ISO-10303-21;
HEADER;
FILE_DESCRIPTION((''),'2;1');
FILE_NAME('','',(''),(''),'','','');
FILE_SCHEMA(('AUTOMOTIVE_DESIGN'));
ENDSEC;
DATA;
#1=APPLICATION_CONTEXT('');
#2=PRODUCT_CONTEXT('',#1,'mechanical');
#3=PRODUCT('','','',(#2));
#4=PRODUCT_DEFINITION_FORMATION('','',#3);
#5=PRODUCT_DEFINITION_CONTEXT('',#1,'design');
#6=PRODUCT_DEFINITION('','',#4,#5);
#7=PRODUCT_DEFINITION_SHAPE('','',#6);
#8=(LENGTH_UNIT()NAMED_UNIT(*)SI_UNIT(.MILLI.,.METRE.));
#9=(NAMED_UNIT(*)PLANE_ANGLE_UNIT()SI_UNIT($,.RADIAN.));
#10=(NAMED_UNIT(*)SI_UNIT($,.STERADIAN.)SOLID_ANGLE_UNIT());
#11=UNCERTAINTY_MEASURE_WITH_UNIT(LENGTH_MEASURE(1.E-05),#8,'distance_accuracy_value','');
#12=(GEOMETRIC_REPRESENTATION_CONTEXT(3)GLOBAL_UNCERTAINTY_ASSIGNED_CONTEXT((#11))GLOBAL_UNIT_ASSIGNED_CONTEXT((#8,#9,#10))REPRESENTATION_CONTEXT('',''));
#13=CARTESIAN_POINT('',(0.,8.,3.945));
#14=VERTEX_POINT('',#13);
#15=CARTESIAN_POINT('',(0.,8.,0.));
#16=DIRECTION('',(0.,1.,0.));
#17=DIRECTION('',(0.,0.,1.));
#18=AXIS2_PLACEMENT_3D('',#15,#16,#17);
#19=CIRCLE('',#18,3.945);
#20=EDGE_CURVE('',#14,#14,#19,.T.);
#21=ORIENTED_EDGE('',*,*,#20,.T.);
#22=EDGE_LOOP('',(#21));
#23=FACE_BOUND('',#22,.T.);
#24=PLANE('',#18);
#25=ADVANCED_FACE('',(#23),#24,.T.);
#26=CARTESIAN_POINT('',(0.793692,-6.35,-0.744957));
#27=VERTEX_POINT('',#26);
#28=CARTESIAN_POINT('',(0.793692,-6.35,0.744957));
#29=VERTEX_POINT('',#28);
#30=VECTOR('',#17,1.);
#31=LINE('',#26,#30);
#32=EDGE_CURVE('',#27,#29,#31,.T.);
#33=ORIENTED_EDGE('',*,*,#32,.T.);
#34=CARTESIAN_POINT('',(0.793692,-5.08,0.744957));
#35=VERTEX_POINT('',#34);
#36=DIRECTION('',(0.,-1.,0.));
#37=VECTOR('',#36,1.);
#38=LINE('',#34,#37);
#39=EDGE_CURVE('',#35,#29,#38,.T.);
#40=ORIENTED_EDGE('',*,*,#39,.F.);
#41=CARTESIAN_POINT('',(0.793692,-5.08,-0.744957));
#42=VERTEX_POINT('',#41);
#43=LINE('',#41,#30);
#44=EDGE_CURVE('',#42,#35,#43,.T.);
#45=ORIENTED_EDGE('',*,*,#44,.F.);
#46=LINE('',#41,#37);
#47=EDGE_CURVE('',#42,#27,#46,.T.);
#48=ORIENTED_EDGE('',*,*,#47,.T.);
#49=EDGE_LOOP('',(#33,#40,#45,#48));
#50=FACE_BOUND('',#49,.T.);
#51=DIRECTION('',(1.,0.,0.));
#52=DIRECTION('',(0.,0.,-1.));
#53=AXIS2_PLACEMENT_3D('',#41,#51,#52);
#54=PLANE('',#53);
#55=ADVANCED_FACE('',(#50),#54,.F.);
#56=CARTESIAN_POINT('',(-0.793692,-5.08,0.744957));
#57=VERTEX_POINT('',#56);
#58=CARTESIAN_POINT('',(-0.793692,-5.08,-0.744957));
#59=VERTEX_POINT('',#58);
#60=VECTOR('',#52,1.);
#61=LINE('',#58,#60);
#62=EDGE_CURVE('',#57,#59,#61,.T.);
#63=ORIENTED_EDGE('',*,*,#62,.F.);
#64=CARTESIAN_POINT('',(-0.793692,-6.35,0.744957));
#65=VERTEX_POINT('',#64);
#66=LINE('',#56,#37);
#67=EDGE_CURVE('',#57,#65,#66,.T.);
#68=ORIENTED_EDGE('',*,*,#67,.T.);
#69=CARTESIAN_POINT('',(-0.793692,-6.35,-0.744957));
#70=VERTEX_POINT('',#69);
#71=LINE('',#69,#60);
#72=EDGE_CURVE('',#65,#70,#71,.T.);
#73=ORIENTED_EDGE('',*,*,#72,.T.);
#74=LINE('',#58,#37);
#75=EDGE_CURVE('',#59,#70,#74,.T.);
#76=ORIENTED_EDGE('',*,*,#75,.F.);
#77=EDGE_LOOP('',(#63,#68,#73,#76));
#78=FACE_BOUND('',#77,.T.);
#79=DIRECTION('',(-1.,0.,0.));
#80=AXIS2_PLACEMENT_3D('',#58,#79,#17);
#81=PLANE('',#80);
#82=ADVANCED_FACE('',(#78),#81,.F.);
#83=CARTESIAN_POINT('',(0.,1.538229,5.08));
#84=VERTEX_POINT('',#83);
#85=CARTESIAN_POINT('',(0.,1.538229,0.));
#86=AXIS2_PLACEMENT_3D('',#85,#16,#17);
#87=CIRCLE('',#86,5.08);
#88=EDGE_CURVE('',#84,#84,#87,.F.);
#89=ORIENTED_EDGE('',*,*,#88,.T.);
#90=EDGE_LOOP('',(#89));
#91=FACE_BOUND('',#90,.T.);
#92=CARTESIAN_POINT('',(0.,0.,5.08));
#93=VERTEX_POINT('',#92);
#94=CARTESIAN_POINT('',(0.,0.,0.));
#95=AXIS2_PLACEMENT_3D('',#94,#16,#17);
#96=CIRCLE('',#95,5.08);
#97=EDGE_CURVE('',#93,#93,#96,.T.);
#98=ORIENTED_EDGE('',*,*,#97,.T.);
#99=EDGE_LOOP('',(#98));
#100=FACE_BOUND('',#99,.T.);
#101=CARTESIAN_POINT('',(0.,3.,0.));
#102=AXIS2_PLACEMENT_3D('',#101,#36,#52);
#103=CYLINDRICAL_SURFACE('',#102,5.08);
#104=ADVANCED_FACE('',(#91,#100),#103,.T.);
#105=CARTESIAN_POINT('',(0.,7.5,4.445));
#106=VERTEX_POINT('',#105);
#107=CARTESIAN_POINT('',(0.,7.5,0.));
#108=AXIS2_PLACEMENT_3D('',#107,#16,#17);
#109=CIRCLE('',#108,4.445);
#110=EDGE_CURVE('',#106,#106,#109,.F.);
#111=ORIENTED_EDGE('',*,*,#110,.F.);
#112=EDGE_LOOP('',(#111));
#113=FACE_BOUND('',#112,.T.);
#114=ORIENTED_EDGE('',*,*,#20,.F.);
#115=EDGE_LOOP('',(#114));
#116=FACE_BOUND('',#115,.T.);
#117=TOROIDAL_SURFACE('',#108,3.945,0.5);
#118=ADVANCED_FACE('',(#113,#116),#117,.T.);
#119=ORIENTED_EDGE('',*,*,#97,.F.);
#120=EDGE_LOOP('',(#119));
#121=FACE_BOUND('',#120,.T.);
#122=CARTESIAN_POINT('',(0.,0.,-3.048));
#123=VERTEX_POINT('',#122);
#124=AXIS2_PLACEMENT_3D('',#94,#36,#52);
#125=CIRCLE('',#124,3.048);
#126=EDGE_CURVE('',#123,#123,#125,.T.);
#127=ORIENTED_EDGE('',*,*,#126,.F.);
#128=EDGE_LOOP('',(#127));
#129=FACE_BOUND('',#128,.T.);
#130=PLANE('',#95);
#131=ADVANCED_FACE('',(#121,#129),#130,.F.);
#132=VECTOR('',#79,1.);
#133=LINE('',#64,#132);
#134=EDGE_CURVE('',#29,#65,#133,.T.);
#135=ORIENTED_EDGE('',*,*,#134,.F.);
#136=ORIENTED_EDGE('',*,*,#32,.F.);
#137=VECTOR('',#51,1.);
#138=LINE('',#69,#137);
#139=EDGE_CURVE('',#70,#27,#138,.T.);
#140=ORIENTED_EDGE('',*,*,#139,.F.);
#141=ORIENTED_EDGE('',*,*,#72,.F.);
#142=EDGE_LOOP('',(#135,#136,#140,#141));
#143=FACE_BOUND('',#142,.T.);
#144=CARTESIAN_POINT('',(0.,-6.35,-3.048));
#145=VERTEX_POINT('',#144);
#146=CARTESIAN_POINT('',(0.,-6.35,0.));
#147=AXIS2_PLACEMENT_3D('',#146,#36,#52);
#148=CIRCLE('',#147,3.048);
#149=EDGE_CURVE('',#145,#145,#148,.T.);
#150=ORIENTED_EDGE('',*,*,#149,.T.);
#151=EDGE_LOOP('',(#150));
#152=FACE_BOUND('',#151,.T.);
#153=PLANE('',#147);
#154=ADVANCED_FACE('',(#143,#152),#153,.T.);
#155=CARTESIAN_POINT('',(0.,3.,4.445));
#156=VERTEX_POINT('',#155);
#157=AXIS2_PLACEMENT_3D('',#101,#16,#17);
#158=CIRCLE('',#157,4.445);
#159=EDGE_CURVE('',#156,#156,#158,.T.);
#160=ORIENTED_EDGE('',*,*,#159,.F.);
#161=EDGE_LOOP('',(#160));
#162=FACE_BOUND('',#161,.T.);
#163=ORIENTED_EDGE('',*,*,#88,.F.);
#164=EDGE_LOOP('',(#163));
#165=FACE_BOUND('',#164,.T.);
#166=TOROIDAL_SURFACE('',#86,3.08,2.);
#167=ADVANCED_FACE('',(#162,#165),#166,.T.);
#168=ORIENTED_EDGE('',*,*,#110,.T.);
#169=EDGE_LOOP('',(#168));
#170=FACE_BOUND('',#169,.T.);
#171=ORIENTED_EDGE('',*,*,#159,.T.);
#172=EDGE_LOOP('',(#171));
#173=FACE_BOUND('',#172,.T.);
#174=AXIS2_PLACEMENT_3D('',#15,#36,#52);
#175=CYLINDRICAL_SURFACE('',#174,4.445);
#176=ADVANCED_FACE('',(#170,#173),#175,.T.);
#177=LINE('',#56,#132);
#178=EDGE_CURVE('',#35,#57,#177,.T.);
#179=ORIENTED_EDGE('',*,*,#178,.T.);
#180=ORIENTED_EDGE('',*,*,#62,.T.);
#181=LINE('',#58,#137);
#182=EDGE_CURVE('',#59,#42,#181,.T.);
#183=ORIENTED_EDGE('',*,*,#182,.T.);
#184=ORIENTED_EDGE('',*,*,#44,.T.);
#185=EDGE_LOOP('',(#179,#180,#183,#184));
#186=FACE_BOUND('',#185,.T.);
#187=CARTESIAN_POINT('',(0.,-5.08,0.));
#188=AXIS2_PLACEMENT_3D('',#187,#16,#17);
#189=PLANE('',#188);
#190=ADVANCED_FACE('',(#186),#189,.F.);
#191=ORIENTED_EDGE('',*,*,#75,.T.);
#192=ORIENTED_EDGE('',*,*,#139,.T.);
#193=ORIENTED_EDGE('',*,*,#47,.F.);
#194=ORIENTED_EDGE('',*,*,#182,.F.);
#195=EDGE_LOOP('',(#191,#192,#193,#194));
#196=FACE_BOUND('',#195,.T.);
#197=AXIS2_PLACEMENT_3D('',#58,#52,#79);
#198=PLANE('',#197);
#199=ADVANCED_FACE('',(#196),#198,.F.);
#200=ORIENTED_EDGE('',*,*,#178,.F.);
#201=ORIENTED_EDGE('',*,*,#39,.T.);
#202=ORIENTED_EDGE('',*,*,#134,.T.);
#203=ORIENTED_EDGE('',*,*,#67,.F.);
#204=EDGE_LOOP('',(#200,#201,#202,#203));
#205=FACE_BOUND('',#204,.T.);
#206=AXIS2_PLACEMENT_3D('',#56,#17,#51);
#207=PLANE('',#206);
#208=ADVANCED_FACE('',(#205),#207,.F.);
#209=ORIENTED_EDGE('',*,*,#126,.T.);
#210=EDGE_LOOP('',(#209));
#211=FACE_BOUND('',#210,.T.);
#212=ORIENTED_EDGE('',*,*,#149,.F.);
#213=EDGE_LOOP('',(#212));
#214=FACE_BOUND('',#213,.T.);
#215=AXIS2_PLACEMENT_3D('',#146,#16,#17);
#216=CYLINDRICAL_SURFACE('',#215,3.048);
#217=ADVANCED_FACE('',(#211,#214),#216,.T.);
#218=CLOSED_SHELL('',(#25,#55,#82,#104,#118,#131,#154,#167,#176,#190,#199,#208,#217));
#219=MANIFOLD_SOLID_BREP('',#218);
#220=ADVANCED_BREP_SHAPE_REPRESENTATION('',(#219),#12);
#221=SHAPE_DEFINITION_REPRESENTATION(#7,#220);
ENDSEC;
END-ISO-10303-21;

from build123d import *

# Parameters (mm, degrees)
SKETCH1_R           = 5.08
BOSS_EXTRUDE1_DEPTH = 3
SKETCH2_R           = 4.445
BOSS_EXTRUDE2_DEPTH = 5
FILLET2_R           = 2
FILLET3_R           = 0.5
SKETCH3_R           = 3.048
BOSS_EXTRUDE3_DEPTH = 6.35
SKETCH4_W           = 1.587384834
SKETCH4_H           = 1.489913834
CUT_EXTRUDE1_DEPTH  = 1.27


with BuildPart() as part:
    # Sketch1 → Boss-Extrude1 (new body)
    with BuildSketch(Plane(origin=(0, 0, 0), x_dir=(1, 0, 0), z_dir=(0, 1, 0))):
        with Locations(Location((0, 0, 0), (0, 0, 270))):
            Circle(SKETCH1_R)
    extrude(amount=BOSS_EXTRUDE1_DEPTH)

    # Sketch2 → Boss-Extrude2 (add)
    with BuildSketch(Plane(origin=(0, 3, 0), x_dir=(1, 0, 0), z_dir=(0, 1, 0))):
        with Locations(Location((0, 0, 0), (0, 0, 270))):
            Circle(SKETCH2_R)
    extrude(amount=BOSS_EXTRUDE2_DEPTH)

    # Fillet2
    # the kernel refuses this fillet: 2 mm, written as the material it takes off along each edge
    with BuildSketch(Plane(origin=(0, 3, 0), x_dir=(0, 0, 1), z_dir=(-1, 0, 0))) as fillet2_piece_1:
        with BuildLine():
            CenterArc((3.08, -1.461771186), FILLET2_R, 0, 46.960687898)
            Line((4.445, 0), (4.4723, 0.029235424))
            ThreePointArc((4.4723, 0.029235424), (4.7625, 0.04), (5.08, 0.04))
            Line((5.08, 0.04), (5.12, 0))
            Line((5.12, 0), (5.12, -1.461771186))
            Line((5.12, -1.461771186), (5.08, -1.461771186))
        make_face()
    revolve(axis=Axis((0, 3, 0), (0, 1, 0)), mode=Mode.SUBTRACT)

    # Fillet3
    fillet3_edges = [part.edges().sort_by_distance(p)[0] for p in [
        (0, 8, -4.445),
    ]]
    fillet(fillet3_edges, radius=FILLET3_R)

    # Sketch3 → Boss-Extrude3 (add)
    with BuildSketch(Plane.XZ):
        with Locations(Location((0, 0, 0), (0, 0, 270))):
            Circle(SKETCH3_R)
    extrude(amount=BOSS_EXTRUDE3_DEPTH)

    # Sketch4 → Cut-Extrude1 (cut)
    with BuildSketch(Plane.XZ.offset(6.35)):
        Rectangle(SKETCH4_W, SKETCH4_H)
    extrude(amount=-CUT_EXTRUDE1_DEPTH, mode=Mode.SUBTRACT)


solid = part.part
